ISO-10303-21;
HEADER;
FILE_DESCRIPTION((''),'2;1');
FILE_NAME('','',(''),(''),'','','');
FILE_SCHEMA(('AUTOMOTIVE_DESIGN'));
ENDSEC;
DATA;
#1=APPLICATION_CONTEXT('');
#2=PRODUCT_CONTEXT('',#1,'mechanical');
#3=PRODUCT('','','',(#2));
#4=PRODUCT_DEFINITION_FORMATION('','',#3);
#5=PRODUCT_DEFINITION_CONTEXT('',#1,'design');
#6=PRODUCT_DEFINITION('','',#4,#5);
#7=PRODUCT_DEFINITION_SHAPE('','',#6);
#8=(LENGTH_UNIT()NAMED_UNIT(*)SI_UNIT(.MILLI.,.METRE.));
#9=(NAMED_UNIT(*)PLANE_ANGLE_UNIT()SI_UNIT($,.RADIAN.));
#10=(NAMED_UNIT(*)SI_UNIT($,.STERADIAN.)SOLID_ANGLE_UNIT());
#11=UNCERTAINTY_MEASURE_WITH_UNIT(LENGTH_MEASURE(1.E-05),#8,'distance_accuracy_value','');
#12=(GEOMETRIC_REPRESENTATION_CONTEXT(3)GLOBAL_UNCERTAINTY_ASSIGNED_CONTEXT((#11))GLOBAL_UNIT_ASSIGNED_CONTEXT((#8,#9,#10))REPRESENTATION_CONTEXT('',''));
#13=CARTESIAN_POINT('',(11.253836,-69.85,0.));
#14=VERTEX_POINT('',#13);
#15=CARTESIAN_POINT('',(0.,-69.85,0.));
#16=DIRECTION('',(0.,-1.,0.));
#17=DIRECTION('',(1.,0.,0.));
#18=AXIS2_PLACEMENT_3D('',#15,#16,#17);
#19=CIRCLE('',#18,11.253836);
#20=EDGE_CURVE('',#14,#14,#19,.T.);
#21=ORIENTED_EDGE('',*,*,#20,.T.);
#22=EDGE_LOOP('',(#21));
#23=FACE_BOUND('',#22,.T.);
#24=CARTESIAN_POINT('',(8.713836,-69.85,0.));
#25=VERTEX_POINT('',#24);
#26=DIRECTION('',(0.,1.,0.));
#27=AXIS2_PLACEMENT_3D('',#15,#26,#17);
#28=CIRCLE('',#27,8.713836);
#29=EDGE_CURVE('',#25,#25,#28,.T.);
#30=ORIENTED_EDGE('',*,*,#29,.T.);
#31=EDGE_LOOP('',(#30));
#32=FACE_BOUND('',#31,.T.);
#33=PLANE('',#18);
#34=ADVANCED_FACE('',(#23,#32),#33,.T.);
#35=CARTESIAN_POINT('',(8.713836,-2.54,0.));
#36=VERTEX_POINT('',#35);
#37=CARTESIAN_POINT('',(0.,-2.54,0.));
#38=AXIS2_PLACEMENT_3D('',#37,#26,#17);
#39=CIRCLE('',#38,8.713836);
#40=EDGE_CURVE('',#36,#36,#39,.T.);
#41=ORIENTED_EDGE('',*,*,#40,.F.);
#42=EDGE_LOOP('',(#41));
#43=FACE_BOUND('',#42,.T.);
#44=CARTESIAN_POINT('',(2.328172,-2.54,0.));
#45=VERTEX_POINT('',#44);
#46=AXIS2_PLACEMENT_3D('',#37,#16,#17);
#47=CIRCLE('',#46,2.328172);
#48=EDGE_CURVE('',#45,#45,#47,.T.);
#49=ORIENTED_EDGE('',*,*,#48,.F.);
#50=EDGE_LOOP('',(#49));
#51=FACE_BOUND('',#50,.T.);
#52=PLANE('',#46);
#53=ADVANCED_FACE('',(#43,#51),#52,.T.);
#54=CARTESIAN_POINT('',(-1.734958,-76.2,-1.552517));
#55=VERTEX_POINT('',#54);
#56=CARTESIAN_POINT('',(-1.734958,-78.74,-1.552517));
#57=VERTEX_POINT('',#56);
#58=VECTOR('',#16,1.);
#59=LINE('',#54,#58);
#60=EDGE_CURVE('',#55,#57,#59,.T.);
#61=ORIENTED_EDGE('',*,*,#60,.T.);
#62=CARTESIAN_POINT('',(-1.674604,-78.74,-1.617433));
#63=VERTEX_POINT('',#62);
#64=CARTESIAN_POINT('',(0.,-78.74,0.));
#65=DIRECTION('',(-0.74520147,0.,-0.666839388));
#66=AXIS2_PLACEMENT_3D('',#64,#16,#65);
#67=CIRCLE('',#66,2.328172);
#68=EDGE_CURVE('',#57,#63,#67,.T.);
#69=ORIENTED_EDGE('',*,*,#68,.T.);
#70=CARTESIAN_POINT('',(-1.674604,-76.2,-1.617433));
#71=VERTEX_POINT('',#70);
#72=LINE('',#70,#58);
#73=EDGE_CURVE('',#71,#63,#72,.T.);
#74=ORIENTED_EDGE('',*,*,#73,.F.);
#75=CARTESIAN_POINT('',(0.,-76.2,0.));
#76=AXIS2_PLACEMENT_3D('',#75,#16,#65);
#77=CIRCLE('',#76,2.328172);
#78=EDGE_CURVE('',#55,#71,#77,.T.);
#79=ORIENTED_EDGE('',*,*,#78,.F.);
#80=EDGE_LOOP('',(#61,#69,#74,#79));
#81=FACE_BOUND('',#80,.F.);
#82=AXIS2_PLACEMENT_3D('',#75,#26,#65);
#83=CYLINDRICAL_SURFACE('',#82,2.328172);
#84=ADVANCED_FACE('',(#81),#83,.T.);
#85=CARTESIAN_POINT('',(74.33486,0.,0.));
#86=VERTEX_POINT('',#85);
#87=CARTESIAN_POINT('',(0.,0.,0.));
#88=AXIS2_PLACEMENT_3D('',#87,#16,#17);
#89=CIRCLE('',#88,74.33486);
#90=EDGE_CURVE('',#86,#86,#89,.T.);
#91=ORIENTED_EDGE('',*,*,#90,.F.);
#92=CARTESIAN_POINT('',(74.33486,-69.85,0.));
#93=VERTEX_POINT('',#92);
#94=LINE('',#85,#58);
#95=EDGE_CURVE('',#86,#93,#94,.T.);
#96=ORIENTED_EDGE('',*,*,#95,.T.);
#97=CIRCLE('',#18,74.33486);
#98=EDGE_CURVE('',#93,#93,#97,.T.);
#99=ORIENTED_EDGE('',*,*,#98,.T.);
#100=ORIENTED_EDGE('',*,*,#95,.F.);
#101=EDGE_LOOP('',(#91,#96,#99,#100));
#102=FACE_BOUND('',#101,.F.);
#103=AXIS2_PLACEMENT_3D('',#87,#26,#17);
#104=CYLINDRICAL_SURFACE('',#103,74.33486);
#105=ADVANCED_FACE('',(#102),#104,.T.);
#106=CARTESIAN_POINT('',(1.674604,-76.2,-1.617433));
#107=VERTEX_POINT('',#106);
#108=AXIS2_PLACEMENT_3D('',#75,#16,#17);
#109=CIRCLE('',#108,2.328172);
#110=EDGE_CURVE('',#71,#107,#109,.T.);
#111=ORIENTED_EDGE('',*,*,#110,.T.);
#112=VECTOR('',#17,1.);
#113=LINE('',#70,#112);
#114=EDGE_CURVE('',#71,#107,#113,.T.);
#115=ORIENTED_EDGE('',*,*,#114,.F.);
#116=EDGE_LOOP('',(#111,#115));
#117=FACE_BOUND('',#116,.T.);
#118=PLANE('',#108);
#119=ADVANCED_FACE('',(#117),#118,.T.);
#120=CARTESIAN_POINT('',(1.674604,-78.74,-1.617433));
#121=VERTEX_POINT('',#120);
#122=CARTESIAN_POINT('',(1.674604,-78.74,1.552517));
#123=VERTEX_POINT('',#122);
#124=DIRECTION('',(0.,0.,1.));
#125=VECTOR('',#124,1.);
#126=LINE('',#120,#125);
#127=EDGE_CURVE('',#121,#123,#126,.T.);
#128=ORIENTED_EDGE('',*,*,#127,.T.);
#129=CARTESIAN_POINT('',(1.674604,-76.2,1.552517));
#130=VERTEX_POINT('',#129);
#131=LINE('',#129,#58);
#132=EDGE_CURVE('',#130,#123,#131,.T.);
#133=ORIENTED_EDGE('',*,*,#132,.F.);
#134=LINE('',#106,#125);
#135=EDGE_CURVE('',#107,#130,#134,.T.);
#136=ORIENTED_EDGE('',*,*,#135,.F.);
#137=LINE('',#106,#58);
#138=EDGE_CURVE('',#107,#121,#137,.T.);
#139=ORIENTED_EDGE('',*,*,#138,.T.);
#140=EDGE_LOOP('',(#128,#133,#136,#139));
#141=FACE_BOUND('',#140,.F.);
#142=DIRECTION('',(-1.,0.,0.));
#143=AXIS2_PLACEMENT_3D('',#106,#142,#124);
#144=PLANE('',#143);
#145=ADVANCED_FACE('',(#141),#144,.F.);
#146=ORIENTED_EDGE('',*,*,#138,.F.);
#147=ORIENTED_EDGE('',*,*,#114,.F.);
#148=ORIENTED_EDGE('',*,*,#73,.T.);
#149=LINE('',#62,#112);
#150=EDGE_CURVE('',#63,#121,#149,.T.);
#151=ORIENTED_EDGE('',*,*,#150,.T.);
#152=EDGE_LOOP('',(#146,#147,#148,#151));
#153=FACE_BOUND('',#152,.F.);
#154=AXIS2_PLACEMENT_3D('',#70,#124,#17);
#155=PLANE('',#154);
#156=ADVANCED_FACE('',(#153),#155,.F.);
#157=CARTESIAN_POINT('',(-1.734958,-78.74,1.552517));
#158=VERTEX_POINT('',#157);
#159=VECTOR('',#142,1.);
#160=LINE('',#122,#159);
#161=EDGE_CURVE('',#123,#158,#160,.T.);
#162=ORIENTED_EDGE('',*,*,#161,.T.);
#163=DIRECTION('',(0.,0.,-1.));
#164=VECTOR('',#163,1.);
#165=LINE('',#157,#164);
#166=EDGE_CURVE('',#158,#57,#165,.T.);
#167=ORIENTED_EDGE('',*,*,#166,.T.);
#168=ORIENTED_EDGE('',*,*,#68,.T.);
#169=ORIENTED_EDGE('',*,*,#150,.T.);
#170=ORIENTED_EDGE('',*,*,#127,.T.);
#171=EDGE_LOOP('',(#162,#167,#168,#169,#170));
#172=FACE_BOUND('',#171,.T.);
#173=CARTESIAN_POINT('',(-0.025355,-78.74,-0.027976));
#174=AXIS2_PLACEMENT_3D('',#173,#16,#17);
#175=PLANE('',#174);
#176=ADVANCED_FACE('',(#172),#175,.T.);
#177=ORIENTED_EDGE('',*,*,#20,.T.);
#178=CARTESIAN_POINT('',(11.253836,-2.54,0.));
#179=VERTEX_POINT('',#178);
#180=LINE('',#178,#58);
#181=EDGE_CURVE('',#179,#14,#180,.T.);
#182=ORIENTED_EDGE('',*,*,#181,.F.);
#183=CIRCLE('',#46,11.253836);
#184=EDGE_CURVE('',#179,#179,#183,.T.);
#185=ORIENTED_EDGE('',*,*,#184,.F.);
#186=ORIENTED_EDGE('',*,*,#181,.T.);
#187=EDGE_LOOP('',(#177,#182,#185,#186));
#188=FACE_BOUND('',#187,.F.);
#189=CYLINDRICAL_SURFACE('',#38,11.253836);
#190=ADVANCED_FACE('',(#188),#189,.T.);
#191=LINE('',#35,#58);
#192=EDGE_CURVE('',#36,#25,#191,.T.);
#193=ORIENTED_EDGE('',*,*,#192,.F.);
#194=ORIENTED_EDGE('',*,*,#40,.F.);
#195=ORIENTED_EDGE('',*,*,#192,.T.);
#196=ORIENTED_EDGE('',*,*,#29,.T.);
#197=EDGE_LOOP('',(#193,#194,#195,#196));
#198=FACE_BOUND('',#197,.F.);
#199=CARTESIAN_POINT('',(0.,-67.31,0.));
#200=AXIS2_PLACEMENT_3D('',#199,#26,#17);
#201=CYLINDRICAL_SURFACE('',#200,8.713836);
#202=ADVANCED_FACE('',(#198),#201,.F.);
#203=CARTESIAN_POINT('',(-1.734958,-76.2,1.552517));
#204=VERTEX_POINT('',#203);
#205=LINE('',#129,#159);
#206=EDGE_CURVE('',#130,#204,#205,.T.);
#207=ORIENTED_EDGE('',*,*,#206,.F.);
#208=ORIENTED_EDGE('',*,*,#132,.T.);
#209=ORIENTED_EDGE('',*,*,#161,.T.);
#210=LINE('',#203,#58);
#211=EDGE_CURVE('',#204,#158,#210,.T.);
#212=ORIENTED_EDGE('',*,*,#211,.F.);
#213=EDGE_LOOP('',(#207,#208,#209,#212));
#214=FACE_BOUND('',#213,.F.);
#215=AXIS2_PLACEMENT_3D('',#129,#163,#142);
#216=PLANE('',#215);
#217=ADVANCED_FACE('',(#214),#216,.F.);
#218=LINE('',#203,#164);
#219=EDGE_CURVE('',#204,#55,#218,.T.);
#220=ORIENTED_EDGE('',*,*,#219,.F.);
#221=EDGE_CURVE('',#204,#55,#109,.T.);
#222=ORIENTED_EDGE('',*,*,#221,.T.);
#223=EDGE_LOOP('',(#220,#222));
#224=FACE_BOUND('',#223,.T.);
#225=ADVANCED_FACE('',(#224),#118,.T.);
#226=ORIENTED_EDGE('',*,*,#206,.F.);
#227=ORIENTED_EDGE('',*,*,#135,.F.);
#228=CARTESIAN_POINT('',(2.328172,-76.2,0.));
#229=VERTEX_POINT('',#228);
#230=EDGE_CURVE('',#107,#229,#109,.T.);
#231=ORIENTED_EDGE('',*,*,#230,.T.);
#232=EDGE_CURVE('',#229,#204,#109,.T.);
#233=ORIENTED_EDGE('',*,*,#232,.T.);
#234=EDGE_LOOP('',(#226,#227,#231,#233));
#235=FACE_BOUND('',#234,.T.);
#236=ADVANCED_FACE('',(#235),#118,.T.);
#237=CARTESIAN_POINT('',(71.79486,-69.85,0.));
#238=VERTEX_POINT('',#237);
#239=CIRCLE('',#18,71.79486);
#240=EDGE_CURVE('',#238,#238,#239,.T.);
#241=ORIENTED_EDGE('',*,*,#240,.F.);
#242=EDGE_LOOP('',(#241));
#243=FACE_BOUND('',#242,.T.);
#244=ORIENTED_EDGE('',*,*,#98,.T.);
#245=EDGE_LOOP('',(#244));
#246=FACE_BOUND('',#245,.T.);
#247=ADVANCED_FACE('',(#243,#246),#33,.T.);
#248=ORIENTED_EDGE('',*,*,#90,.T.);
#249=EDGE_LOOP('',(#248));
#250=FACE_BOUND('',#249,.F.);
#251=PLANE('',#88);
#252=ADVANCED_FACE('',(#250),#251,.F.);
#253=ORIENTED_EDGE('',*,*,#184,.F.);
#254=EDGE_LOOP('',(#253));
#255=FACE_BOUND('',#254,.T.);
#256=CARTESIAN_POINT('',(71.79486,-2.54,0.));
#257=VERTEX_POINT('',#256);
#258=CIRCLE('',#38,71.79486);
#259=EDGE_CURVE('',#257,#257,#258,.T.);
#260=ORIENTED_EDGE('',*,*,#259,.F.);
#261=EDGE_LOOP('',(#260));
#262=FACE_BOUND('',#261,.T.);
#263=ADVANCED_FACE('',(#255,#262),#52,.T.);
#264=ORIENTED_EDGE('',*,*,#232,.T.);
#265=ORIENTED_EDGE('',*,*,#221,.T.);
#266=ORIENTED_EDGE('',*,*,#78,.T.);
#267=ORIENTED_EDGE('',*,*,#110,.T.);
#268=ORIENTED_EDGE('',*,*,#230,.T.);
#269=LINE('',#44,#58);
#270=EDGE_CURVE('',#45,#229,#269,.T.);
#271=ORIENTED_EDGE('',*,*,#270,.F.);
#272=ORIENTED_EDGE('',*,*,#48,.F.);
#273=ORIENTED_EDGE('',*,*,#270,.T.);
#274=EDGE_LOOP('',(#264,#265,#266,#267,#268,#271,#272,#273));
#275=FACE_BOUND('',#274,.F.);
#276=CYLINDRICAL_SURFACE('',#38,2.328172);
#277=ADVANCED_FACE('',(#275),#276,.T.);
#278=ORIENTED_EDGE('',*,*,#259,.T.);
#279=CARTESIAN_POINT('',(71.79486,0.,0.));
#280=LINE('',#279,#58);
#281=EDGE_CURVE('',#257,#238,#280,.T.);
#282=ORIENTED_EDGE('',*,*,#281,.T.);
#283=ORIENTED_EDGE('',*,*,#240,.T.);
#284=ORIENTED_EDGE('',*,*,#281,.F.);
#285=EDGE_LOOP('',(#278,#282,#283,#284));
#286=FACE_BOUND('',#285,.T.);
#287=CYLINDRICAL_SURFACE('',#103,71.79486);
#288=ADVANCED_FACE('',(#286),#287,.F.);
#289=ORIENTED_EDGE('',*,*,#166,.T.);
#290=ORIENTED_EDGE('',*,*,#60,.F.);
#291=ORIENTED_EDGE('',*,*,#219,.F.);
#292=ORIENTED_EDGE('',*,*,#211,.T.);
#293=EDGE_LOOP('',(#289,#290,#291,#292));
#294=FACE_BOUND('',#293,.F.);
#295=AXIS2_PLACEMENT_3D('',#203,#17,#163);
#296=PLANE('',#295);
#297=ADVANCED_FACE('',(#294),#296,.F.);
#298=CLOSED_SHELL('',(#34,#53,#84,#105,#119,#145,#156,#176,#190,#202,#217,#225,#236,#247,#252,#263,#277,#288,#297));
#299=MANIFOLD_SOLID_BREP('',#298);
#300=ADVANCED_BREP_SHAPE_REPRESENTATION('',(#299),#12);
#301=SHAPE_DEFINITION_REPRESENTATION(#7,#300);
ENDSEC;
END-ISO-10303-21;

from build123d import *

# Parameters (mm, degrees)
F0_R     = 74.3348604036
F1_DEPTH = 69.85
F2_T     = -2.54
F3_R     = 11.2538360461
F4_DEPTH = 67.31
F5_T     = -2.54
F6_R     = 2.3281724299
F7_DEPTH = 73.66
F9_DEPTH = 2.54


# Not quite as in the source:
# - a shell that OpenCascade refuses in one call is made with other operations: the cavity is built on its own and cut out


with BuildPart() as f1:
    # F0 (on Front) → F1 (new body)
    with BuildSketch(Plane.XZ):
        Circle(F0_R)
    extrude(amount=F1_DEPTH)

    # F2
    f2_openings = [f1.faces().sort_by_distance(p)[0] for p in [
        (0, -69.85, 0),
    ]]
    offset(amount=F2_T, openings=f2_openings)

    # F3 (on face) → F4 (join)
    with BuildSketch(Plane.XZ.offset(2.54)):
        Circle(F3_R)
    extrude(amount=F4_DEPTH)

    # F5: a shell. OpenCascade refuses it in one call, so the cavity is built on its own and cut out:
    # the body offset inwards by the wall thickness, plus a prism from it out through each open face.
    f5_core = offset(f1.part, amount=F5_T, kind=Kind.INTERSECTION, mode=Mode.PRIVATE)
    f5_exits = [f5_core.faces().sort_by_distance(p)[0] for p in [
        (0, -67.31, 0),
    ]]
    add(f5_core, mode=Mode.SUBTRACT)
    extrude(f5_exits, amount=-F5_T, mode=Mode.SUBTRACT)

    # F6 (on face) → F7 (join)
    with BuildSketch(Plane.XZ.offset(2.54)):
        Circle(F6_R)
    extrude(amount=F7_DEPTH)

    # F8 (on face) → F9 (join)
    with BuildSketch(Plane.XZ.offset(76.2)):
        with BuildLine():
            Line((1.6746039799, 1.552517079), (-1.7349575161, 1.552517079))
            Line((-1.7349575161, 1.552517079), (-1.7349575161, -1.552517079))
            ThreePointArc((-1.7349575161, -1.552517079), (-1.7050897064, -1.5852621097), (-1.6746039799, -1.6174326489))
            Line((-1.6746039799, -1.6174326489), (1.6746039799, -1.6174326489))
            Line((1.6746039799, -1.6174326489), (1.6746039799, 1.552517079))
        make_face()
    extrude(amount=F9_DEPTH)


solid = f1.part
